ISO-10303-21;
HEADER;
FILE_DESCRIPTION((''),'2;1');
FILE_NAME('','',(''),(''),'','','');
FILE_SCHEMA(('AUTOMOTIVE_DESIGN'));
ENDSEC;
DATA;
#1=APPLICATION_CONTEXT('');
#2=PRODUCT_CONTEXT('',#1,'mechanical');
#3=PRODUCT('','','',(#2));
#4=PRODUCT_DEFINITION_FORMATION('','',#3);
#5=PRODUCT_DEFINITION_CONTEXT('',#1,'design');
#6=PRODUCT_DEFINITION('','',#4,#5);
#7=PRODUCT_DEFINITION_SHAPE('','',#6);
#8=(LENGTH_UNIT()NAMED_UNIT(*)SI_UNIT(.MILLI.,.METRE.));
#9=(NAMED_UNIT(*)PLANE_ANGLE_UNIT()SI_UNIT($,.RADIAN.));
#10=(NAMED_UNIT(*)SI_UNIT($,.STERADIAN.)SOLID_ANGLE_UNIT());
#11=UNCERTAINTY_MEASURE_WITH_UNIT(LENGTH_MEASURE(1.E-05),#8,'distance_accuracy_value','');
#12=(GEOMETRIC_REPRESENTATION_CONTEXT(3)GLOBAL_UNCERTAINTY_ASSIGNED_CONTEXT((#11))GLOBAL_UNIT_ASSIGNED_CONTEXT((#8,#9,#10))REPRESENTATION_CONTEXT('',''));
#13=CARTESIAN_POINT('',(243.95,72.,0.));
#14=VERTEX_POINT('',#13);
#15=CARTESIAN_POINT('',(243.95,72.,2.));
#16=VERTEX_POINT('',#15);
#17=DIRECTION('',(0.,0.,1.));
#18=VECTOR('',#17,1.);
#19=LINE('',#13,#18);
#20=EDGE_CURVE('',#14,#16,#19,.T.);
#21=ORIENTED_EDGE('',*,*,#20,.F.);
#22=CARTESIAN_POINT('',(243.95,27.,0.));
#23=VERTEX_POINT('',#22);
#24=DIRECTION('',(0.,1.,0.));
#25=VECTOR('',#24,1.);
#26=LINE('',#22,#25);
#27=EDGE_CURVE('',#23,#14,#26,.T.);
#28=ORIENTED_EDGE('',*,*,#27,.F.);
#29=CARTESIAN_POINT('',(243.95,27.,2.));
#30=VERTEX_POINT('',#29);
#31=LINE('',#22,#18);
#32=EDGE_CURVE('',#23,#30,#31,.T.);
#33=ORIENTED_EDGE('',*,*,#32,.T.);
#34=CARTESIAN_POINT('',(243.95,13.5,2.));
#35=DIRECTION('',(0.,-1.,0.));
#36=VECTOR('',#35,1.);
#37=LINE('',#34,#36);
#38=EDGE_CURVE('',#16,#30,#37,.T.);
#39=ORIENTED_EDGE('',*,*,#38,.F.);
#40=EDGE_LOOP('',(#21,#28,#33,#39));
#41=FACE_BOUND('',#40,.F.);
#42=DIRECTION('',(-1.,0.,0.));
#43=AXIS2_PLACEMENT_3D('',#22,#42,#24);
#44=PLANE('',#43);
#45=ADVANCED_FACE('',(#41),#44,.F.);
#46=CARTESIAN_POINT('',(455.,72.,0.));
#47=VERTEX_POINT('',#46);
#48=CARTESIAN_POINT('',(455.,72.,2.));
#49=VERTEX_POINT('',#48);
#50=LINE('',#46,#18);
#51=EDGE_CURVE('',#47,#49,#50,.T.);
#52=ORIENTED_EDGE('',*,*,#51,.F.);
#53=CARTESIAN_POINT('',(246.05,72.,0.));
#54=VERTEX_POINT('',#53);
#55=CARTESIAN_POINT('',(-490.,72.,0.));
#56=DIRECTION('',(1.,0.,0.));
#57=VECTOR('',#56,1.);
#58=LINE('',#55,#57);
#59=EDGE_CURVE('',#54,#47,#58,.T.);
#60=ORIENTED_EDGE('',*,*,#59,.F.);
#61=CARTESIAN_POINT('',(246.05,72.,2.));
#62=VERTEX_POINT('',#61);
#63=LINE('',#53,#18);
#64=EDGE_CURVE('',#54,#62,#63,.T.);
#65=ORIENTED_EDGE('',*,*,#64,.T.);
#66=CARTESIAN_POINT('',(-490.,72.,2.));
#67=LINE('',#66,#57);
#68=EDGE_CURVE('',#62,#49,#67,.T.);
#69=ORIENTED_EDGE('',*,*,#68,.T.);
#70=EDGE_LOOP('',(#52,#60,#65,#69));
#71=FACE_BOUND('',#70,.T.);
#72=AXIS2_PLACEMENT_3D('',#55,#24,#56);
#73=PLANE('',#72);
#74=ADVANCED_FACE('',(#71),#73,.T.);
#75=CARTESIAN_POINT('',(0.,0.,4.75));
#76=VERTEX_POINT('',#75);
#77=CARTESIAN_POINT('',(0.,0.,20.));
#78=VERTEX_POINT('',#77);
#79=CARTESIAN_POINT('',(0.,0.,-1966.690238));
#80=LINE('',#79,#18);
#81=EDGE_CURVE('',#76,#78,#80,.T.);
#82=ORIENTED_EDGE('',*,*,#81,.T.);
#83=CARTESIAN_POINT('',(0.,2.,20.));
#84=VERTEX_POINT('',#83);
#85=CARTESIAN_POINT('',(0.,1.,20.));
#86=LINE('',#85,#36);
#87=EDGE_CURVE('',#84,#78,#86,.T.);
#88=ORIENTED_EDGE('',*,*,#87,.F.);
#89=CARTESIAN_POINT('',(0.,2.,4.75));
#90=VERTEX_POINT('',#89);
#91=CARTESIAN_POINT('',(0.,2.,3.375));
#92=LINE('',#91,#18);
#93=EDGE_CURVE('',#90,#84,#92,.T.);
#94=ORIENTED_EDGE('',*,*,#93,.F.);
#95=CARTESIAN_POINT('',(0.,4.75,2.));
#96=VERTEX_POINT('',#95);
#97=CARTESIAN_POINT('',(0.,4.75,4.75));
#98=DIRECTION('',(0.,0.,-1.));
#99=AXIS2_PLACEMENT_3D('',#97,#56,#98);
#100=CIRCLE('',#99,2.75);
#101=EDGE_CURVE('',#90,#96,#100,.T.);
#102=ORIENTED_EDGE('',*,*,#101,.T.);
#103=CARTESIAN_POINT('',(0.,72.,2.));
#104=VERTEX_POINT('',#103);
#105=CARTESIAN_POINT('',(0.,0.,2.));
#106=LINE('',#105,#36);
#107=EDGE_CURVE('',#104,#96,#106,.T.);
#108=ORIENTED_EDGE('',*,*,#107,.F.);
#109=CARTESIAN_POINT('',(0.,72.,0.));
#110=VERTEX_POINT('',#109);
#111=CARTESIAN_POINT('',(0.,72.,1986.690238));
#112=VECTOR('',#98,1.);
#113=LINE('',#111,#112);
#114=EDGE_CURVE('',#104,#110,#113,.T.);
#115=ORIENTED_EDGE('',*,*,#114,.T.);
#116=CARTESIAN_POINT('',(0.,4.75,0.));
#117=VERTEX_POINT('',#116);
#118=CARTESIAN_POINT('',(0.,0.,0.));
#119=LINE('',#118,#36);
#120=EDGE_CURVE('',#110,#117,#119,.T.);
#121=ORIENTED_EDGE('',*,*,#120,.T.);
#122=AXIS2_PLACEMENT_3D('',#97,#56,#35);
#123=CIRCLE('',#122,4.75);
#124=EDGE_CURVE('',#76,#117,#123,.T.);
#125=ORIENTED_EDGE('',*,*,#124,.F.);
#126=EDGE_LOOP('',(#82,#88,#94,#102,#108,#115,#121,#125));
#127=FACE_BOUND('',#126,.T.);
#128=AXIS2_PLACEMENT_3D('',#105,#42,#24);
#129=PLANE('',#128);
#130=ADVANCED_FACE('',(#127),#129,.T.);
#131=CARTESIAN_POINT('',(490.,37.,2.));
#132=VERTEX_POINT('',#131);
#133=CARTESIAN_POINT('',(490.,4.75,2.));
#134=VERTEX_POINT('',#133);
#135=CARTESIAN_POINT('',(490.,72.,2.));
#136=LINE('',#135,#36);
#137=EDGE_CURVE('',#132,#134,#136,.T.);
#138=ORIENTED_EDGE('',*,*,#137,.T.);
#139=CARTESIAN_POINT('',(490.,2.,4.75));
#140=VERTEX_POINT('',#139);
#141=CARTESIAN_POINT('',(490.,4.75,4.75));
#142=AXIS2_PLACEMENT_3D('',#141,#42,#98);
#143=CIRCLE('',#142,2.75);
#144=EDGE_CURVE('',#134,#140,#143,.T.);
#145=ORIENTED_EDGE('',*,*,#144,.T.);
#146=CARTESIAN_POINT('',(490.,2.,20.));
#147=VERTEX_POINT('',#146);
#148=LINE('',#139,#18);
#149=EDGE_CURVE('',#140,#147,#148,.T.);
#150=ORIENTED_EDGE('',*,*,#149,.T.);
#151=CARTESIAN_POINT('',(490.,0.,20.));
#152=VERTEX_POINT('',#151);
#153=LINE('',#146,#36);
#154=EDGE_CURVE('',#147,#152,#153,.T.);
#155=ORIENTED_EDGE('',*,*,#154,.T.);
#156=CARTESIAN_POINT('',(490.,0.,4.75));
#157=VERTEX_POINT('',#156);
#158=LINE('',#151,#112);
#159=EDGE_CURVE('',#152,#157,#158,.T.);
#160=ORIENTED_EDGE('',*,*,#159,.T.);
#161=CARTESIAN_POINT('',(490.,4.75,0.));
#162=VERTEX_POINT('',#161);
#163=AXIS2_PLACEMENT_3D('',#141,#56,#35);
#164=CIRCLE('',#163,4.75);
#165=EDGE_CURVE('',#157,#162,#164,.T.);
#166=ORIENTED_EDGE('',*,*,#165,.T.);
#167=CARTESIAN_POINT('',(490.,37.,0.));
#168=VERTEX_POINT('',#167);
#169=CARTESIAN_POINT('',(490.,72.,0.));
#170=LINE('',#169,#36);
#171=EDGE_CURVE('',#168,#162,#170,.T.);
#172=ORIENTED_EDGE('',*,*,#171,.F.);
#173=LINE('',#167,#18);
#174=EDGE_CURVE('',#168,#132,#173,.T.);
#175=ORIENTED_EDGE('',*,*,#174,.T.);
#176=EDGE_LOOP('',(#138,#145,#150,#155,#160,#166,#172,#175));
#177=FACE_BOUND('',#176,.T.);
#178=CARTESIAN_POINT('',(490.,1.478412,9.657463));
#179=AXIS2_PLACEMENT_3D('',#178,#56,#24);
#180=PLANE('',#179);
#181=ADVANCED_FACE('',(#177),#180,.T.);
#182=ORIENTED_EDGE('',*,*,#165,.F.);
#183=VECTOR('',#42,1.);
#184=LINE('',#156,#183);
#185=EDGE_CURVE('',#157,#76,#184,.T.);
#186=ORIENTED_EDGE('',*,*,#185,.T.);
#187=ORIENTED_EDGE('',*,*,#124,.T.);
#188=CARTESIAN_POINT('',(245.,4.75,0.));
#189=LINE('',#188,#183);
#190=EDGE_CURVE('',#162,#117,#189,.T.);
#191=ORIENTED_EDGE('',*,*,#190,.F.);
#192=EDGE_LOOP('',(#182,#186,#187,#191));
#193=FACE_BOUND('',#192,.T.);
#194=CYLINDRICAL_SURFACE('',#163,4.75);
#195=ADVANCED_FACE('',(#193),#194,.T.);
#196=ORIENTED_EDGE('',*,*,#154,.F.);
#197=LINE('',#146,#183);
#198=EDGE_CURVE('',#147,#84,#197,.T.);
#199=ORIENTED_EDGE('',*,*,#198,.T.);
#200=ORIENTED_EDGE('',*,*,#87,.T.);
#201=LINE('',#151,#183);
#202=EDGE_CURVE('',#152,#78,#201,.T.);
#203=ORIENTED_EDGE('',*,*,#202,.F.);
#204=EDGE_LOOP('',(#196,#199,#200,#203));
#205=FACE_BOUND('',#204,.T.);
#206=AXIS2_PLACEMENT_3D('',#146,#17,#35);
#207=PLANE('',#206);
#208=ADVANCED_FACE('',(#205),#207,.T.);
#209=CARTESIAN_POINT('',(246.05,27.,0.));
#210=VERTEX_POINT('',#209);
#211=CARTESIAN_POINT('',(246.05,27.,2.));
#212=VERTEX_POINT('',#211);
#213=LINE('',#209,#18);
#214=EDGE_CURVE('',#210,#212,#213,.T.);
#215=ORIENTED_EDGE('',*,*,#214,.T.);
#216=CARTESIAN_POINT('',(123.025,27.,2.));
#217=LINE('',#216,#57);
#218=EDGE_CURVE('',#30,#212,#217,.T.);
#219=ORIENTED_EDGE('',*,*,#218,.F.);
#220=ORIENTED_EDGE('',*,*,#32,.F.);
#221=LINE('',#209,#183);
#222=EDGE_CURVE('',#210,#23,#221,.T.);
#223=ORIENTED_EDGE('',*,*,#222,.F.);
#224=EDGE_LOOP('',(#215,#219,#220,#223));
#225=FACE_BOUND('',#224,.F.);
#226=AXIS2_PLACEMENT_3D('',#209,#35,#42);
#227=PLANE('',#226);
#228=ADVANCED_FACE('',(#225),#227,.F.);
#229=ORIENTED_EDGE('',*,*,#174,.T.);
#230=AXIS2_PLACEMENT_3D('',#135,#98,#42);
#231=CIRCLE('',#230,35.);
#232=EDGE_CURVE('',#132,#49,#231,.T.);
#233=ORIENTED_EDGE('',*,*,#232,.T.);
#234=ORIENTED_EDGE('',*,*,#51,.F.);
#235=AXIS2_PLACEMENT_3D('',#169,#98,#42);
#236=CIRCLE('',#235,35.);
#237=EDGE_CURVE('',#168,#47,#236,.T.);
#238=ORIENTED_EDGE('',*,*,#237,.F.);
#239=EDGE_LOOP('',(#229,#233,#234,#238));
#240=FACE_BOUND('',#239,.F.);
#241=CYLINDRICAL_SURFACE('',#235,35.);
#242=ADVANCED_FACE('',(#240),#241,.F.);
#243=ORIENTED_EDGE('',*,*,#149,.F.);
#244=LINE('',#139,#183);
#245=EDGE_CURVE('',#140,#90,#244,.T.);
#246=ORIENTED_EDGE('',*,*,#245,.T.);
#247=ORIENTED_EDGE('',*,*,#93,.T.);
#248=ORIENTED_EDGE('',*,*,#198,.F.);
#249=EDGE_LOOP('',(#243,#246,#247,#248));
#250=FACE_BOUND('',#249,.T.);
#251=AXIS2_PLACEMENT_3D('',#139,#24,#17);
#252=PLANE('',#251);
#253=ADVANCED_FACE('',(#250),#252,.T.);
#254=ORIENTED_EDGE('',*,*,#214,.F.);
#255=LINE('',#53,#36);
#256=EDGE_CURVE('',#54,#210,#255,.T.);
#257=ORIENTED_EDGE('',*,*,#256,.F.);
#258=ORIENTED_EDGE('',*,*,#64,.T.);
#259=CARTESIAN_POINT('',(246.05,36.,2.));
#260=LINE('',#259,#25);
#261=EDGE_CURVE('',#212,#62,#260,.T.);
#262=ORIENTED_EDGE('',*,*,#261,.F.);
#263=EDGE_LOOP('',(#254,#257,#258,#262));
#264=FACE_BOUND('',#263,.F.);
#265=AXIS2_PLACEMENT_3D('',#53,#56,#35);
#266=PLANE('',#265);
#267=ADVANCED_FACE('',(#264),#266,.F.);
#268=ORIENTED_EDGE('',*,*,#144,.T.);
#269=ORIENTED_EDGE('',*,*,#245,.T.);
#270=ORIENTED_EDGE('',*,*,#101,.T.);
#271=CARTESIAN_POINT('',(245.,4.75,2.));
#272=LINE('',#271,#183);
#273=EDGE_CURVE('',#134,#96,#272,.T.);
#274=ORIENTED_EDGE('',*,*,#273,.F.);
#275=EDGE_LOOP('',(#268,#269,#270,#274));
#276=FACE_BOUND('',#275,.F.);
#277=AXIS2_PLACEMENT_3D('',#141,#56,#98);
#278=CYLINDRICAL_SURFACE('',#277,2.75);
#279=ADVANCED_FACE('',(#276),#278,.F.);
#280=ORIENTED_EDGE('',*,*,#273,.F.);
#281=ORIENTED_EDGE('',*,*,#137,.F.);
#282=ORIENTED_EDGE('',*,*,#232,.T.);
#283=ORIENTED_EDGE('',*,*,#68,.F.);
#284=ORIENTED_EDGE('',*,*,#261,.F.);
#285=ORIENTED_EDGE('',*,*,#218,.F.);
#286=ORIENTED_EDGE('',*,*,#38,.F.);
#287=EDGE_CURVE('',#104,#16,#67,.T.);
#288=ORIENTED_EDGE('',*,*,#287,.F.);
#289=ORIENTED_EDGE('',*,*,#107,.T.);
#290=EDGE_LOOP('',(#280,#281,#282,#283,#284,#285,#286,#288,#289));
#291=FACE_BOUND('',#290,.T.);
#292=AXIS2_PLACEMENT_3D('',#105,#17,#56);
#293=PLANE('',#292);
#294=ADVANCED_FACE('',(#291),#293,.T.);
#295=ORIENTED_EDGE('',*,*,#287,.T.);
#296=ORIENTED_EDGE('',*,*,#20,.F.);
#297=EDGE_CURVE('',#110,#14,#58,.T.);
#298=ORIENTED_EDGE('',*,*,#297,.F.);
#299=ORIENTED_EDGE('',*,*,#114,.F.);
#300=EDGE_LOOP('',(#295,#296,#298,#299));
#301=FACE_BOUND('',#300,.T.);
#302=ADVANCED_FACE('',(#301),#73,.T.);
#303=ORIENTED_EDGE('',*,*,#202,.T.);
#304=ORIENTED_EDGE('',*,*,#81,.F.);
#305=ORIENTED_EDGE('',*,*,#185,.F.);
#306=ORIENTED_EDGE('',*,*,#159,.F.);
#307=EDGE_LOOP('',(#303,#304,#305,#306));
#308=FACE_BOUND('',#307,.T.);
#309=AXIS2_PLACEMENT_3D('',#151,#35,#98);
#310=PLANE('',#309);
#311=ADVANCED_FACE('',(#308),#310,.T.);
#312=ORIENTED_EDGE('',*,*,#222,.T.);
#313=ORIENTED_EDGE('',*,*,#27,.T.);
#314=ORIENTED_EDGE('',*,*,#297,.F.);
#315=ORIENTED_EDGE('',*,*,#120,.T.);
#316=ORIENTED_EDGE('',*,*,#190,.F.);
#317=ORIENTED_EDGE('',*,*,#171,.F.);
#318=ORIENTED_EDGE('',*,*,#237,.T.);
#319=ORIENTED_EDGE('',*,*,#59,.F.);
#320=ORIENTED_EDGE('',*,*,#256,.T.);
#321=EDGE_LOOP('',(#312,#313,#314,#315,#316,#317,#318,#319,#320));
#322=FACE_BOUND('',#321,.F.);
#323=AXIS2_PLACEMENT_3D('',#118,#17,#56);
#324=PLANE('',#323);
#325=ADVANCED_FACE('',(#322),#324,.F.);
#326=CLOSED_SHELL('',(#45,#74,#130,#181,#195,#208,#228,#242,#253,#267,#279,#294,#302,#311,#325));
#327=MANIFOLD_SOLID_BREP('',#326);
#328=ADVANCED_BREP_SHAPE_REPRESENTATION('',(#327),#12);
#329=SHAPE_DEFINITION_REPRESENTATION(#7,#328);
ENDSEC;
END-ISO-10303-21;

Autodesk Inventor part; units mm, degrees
ref_plane "YZ Plane" through (0, 0, 0) normal (1, 0, 0) x (0, 1, 0)
ref_plane "XZ Plane" through (0, 0, 0) normal (0, 1, 0) x (-1, 0, 0)
ref_plane "XY Plane" through (0, 0, 0) normal (0, 0, 1) x (1, 0, 0)
sketch "Sketch1" plane through (0, 0, 0) normal (0, 0, 1) x (1, 0, 0)
  line L0 (-490, 72) -> (490, 72)
  line L1 (490, 72) -> (490, 0)
  line L2 (490, 0) -> (-490, 0)
  line L3 (-490, 0) -> (-490, 72)
  point P0 (0, 0)
  point P1 (0, 0)
  dimension "d0" = 980
  dimension "d1" = 72
extrude "Plate1" add sketch "Sketch1" along normal blind 2
sketch "Sketch2" plane through (490, 2, 0) normal (0, -1, 0) x (1, 0, 0)
  line L0 (-980, 0) -> (0, 0)
  line L1 (0, 0) -> (0, 20)
  line L2 (0, 20) -> (-980, 20)
  line L3 (-980, 20) -> (-980, 0)
edge flange "Flange1" height 20 angle 90 thickness 2 bend radius 2.75 thickness toward (0, -1, 0) relief round relief width 2 relief depth 1 edges at (0, 0, 2) wall of the first edge with corners at (-490, 2, 0) (490, 2, 0) (490, 2, 20) (-490, 2, 20)
bend "Bend1"
corner "Corner1"
sketch "Sketch5" plane through (0, 0, 0) normal (0, 0, -1) x (-1, 0, 0)
  line L0 (490, 72) -> (-490, 72) projected
  line L1 (490, 0) -> (-490, 0) projected
  circle A0 centre (0, 72) radius 35
  line L2 (243.95, 72) -> (246.05, 72)
  line L3 (246.05, 72) -> (246.05, 27)
  line L4 (246.05, 27) -> (243.95, 27)
  line L5 (243.95, 27) -> (243.95, 72)
  line L6 (-243.95, 72) -> (-246.05, 72)
  line L7 (-246.05, 72) -> (-246.05, 27)
  line L8 (-246.05, 27) -> (-243.95, 27)
  line L9 (-243.95, 27) -> (-243.95, 72)
  line L10 (0, 72) -> (0, 0) construction
  line L11 (-490, 0) -> (-490, 72)
  line L12 (490, 0) -> (490, 72)
  circle A1 centre (-490, 72) radius 35
  circle A2 centre (490, 72) radius 35
  point P0 (0, 0)
  point P1 (245, 27)
  point P2 (-245, 27)
  point P3 (246.05, 72)
  point P4 (-35, 72)
  point P5 (35, 72)
  point P6 (-246.05, 72)
  point P7 (455, 72)
  point P8 (490, 37)
  point P9 (-490, 37)
  point P10 (-455, 72)
  dimension "d45" = 70
  dimension "d48" = 2.1
  dimension "d49" = 490
  dimension "d51" = 27
  dimension "d52" = 45
extrude "Extrusion1" cut sketch "Sketch5" against normal through all contours L3 L4 L5 L0 | L0 L12 A2 | L9 L8 L7 L0 | L11 L0 A1 picked at (487.4039, 48.9592) picked at (-466.9592, 69.4039)
sketch "Sketch9" plane through (0, 0, 2) normal (0, 0, 1) x (1, 0, 0)
  line L0 (467.0539, 27.7998) -> (467.0539, 15.7998) construction
  line L1 (467.0539, 15.7998) -> (267.0539, 15.7998) construction
  line L2 (267.0539, 15.7998) -> (267.0539, 27.7998) construction
  line L3 (267.0539, 27.7998) -> (467.0539, 27.7998) construction
  line L4 (-490, 72) -> (490, 72) projected
  point P0 (0, 0)
  point P1 (1.05, 68)
  point P2 (490, 72)
  point P3 (-490, 72)
  dimension "d40" = 200
  dimension "d41" = 12
mark "Mark2"
sketch "Sketch10" plane through (-243.95, 72, 2) normal (0, 0, 1) x (1, 0, 0)
  line L0 (-246.05, -70) -> (-246.05, -72) projected
  line L1 (0, 0) -> (487.9, 0) projected
  line L2 (-246.05, -72) -> (243.95, -72)
  line L3 (243.95, -72) -> (243.95, 0)
  line L4 (243.95, 0) -> (-246.05, 0)
  line L5 (-246.05, 0) -> (-246.05, -72)
  point P0 (243.95, -72)
  dimension "d53" = 490
extrude "Extrusion4" cut sketch "Sketch10" along normal through all both and the other way through all
equation "\"d2\" = Thickness"
equation "\"d3\" = BendReliefWidth"
equation "\"d4\" = BendReliefDepth"
equation "\"d5\" = MinimumRemnant"
equation "\"d6\" = TransitionRadius"
equation "\"d9\" = BendRadius"
equation "\"d10\" = CornerReliefSize"
equation "\"d11\" = GapSize"
equation "\"d12\" = JacobiRadiusSize"
equation "\"BendReliefWidth\" = Thickness"
equation "\"BendReliefDepth\" = 0.5 * Thickness"
equation "\"CornerReliefSize\" = 4 * Thickness"
equation "\"MinimumRemnant\" = 2 * Thickness"
equation "\"TransitionRadius\" = BendRadius"
equation "\"JacobiRadiusSize\" = BendRadius"
equation "\"GapSize\" = Thickness"
equation "\"Thickness\" = 2"
equation "\"BendRadius\" = 2.75"
properties part number "MSC 328 STRINGER BOARD  ####" material "Stainless Steel"
